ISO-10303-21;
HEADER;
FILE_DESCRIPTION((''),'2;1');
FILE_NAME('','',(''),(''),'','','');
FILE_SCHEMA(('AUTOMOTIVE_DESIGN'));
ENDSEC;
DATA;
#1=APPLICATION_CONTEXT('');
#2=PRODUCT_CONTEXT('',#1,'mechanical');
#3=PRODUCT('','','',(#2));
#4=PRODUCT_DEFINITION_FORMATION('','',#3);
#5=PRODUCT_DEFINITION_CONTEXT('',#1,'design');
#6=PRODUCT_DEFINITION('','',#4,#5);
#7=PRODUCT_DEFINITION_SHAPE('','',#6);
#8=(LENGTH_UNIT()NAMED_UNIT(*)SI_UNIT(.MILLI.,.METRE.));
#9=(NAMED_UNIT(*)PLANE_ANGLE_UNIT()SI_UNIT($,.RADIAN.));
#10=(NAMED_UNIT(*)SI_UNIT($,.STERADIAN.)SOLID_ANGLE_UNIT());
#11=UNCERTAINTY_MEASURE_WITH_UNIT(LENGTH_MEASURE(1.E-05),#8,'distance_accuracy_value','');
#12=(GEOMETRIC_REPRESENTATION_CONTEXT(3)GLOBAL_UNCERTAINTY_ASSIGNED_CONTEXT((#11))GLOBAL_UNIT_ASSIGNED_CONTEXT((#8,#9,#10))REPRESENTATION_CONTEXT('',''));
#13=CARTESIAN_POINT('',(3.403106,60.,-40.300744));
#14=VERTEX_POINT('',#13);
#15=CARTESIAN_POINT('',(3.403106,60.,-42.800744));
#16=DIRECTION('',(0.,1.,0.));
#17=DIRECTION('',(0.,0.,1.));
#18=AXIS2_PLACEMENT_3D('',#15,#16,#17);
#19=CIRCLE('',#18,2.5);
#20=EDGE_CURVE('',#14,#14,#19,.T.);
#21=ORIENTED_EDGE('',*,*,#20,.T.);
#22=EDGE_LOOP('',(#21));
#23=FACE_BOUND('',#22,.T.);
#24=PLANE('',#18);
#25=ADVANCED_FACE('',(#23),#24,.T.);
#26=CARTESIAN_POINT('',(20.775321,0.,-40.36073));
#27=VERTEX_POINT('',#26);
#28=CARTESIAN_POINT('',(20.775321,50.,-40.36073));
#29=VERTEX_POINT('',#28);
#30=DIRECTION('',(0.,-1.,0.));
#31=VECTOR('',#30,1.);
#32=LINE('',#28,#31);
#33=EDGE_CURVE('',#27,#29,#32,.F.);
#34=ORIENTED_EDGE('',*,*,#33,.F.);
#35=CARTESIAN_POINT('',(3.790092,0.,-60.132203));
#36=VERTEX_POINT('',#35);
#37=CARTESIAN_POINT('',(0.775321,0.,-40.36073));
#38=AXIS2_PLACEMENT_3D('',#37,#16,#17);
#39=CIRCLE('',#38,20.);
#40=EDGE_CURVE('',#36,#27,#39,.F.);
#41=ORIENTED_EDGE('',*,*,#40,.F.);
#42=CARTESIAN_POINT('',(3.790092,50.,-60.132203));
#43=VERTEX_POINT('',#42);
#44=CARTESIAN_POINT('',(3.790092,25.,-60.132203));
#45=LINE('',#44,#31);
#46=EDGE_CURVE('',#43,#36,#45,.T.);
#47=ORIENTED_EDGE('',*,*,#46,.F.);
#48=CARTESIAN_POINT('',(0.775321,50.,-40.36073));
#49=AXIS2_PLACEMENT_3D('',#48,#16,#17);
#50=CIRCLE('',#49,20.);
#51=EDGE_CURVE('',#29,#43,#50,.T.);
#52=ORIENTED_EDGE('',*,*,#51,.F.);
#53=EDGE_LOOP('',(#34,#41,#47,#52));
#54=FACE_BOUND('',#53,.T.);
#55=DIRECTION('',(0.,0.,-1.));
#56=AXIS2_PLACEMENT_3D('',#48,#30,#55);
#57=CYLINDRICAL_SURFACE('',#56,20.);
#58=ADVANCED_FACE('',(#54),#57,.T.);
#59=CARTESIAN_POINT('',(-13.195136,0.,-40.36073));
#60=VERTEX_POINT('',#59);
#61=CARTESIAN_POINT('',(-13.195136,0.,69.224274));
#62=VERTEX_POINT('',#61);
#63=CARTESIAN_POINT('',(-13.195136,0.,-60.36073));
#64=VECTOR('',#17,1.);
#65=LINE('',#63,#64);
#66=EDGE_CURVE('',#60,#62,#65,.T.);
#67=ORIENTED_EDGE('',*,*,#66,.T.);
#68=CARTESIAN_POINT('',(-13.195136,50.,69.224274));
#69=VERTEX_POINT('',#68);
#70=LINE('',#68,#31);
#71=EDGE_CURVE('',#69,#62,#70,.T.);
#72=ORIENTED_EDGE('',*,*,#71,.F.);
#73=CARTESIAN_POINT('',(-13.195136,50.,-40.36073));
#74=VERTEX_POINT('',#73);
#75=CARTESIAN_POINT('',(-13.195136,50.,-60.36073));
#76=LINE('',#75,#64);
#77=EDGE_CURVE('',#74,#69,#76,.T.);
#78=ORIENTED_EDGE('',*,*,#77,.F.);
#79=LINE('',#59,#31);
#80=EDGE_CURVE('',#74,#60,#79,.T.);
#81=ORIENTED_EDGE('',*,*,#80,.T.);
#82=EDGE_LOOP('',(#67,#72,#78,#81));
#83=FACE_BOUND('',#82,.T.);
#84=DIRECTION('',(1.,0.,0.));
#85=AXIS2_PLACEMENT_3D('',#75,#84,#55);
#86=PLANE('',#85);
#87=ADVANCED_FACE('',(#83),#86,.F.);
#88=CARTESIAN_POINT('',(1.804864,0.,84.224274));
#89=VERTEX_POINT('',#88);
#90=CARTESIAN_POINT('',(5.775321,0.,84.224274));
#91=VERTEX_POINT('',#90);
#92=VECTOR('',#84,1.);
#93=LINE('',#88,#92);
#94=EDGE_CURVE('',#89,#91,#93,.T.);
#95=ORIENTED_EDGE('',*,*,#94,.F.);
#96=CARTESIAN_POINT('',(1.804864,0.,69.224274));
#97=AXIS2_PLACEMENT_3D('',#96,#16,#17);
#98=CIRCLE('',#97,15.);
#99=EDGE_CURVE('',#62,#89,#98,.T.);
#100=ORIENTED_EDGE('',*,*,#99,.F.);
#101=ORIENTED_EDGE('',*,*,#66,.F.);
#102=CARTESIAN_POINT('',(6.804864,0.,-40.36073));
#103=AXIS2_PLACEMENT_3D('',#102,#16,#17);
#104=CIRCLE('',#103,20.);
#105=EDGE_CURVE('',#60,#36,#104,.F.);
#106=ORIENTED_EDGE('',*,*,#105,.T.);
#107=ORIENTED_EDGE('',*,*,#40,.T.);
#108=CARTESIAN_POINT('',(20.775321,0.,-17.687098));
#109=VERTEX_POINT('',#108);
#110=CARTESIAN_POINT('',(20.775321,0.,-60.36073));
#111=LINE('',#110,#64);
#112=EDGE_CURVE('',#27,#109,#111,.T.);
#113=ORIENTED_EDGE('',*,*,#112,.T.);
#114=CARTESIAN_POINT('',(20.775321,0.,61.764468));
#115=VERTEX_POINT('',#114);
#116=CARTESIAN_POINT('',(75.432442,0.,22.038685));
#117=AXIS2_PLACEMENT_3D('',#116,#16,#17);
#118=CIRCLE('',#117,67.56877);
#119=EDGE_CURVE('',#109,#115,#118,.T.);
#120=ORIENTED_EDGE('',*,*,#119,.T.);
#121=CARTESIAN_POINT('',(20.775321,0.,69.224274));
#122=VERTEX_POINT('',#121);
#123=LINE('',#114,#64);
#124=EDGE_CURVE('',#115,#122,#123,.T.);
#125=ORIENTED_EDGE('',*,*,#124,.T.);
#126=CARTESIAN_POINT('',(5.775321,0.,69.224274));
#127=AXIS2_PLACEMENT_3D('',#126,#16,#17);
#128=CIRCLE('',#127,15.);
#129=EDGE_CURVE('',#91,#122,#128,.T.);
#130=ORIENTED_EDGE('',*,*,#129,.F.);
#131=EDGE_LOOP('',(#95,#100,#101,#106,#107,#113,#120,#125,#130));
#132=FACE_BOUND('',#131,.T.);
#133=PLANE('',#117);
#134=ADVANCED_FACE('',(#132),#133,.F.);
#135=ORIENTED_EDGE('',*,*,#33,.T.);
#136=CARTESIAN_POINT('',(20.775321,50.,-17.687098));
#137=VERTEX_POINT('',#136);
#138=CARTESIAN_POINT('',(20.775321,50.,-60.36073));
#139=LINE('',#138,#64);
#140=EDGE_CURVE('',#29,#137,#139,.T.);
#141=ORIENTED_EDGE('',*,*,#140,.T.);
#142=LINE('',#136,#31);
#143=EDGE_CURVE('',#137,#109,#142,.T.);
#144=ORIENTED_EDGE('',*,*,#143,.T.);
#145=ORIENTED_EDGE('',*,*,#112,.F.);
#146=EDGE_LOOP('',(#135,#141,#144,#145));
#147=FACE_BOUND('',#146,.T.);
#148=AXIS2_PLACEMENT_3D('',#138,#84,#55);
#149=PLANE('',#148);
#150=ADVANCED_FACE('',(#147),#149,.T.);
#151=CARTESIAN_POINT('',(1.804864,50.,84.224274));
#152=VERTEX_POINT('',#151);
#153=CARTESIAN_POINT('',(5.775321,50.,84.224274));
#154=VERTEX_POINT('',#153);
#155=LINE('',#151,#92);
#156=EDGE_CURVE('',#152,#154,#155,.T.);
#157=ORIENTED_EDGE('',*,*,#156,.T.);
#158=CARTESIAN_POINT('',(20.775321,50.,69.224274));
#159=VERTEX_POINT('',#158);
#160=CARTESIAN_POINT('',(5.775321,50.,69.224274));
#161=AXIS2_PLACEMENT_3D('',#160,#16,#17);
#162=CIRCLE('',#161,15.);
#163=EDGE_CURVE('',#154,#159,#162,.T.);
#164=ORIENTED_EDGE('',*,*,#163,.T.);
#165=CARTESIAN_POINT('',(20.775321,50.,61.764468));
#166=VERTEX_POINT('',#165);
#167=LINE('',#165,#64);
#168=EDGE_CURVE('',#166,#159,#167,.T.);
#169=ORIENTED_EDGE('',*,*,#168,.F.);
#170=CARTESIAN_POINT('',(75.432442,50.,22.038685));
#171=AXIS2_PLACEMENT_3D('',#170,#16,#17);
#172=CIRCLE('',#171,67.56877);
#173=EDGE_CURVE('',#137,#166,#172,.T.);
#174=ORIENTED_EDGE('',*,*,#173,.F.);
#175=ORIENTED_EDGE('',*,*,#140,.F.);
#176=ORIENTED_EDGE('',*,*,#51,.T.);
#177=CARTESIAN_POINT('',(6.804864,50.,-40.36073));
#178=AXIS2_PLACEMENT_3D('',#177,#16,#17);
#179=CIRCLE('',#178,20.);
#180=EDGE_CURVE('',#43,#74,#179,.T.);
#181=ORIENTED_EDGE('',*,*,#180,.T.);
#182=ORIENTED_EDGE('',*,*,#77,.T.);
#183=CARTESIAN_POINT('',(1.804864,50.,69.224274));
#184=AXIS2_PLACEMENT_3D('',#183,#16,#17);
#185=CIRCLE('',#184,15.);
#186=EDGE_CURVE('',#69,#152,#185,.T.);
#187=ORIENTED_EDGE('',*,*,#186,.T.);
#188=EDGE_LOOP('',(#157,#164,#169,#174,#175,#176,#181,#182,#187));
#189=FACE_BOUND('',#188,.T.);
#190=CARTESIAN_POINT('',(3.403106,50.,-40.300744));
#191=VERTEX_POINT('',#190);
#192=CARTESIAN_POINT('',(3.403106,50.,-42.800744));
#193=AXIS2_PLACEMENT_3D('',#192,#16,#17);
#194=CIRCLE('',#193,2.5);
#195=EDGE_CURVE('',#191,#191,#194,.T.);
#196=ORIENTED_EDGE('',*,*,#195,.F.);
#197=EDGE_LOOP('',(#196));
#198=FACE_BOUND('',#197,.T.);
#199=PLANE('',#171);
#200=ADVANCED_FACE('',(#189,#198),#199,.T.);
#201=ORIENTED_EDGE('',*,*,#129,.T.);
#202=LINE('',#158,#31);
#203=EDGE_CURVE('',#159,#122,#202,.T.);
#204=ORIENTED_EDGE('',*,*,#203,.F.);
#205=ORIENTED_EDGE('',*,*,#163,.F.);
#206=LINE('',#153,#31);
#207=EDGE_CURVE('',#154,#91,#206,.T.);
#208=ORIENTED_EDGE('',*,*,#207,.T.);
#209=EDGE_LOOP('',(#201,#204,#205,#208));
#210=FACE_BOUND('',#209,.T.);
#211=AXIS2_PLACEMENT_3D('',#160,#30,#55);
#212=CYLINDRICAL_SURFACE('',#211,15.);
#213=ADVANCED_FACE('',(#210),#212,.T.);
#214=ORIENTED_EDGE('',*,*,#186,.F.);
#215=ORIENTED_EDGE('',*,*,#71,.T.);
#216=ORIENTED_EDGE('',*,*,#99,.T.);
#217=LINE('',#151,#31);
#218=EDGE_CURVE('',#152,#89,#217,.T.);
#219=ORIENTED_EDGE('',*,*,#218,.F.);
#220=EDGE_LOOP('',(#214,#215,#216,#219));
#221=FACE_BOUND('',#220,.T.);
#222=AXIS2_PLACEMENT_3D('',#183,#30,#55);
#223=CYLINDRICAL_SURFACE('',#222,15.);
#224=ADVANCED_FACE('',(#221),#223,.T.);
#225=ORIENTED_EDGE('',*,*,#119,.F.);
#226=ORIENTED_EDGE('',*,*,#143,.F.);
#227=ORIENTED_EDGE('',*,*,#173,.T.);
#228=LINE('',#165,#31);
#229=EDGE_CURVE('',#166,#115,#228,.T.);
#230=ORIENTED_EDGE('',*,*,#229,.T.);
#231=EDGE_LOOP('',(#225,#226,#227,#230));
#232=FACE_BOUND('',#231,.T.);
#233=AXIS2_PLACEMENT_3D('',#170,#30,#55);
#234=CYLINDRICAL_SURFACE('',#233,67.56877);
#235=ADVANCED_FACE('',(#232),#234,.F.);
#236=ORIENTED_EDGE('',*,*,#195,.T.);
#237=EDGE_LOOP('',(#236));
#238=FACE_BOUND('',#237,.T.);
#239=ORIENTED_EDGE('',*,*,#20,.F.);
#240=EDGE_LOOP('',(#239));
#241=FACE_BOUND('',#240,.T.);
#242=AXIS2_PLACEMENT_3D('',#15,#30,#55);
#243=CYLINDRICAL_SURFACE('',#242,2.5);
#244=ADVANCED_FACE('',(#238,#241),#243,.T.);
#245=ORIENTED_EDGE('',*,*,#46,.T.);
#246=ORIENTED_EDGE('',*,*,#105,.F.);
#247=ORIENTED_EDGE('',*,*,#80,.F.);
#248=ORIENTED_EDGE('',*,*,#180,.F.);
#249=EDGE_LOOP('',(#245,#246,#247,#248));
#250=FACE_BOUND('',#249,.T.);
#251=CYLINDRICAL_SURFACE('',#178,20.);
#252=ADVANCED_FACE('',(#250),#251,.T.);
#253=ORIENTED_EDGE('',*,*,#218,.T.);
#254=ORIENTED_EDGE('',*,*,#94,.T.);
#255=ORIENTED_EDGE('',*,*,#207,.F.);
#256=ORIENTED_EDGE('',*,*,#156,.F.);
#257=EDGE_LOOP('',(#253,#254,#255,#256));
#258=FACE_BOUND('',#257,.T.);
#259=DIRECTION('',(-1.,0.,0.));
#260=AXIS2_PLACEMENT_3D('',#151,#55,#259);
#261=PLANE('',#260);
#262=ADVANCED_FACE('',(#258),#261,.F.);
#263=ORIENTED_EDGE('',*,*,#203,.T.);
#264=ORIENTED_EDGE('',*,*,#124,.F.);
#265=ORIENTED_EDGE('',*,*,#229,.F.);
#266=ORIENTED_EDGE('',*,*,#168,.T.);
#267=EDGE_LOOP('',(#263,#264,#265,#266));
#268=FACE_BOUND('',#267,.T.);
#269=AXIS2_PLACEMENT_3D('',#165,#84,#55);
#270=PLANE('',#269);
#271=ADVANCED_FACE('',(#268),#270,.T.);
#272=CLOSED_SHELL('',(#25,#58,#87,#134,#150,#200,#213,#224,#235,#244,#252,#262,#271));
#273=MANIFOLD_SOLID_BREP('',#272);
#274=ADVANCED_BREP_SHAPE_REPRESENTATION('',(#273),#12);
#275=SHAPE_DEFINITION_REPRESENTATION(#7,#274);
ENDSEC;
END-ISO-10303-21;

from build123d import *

# Parameters (mm, degrees)
EXTRUDE_1_DEPTH = 50
SKETCH_3_R      = 2.5
EXTRUDE_2_DEPTH = 10
FILLET_1_R      = 20


with BuildPart() as part:
    # Эскиз2 → Бобышка-Вытянуть1 (new body)
    with BuildSketch(Plane(origin=(0, 0, 0), x_dir=(1, 0, 0), z_dir=(0, 1, 0))):
        with BuildLine():
            Line((20.775320905, -61.764467554), (20.775320905, -69.224273938))
            ThreePointArc((20.775320905, -69.224273938), (16.381922622, -79.830875656), (5.775320905, -84.224273938))
            Line((5.775320905, -84.224273938), (1.80486375, -84.224273938))
            ThreePointArc((1.80486375, -84.224273938), (-8.801737968, -79.830875656), (-13.19513625, -69.224273938))
            Line((-13.19513625, -69.224273938), (-13.19513625, 60.360729655))
            Line((-13.19513625, 60.360729655), (20.775320905, 60.360729655))
            Line((20.775320905, 60.360729655), (20.775320905, 17.687097527))
            ThreePointArc((20.775320905, 17.687097527), (7.863671927, -22.038685014), (20.775320905, -61.764467554))
        make_face()
    extrude(amount=EXTRUDE_1_DEPTH)

    # Эскиз3 → Бобышка-Вытянуть2 (add)
    with BuildSketch(Plane(origin=(0, 50, 0), x_dir=(1, 0, 0), z_dir=(0, 1, 0))):
        with Locations(Location((3.403106264, 42.800743613, 0), (0, 0, 270))):
            Circle(SKETCH_3_R)
    extrude(amount=EXTRUDE_2_DEPTH)

    # Скругление1
    # the kernel refuses this fillet: 20 mm, written as the material it takes off along each edge
    with BuildSketch(Plane(origin=(-13.19513625, -50, -60.360729655), x_dir=(0, 0, 1), z_dir=(0, 1, 0))) as fillet_1_piece_1:
        with BuildLine():
            CenterArc((FILLET_1_R, FILLET_1_R), FILLET_1_R, 180, 90)
            Line((0, FILLET_1_R), (0, 0))
            Line((0, 0), (FILLET_1_R, 0))
        make_face()
    extrude(amount=150, mode=Mode.SUBTRACT)
    with BuildSketch(Plane(origin=(20.775320905, -50, -60.360729655), x_dir=(0, 0, 1), z_dir=(0, 1, 0))) as fillet_1_piece_2:
        with BuildLine():
            CenterArc((FILLET_1_R, -FILLET_1_R), FILLET_1_R, 90, 90)
            Line((0, -FILLET_1_R), (0, 0))
            Line((0, 0), (FILLET_1_R, 0))
        make_face()
    extrude(amount=150, mode=Mode.SUBTRACT)


solid = part.part
